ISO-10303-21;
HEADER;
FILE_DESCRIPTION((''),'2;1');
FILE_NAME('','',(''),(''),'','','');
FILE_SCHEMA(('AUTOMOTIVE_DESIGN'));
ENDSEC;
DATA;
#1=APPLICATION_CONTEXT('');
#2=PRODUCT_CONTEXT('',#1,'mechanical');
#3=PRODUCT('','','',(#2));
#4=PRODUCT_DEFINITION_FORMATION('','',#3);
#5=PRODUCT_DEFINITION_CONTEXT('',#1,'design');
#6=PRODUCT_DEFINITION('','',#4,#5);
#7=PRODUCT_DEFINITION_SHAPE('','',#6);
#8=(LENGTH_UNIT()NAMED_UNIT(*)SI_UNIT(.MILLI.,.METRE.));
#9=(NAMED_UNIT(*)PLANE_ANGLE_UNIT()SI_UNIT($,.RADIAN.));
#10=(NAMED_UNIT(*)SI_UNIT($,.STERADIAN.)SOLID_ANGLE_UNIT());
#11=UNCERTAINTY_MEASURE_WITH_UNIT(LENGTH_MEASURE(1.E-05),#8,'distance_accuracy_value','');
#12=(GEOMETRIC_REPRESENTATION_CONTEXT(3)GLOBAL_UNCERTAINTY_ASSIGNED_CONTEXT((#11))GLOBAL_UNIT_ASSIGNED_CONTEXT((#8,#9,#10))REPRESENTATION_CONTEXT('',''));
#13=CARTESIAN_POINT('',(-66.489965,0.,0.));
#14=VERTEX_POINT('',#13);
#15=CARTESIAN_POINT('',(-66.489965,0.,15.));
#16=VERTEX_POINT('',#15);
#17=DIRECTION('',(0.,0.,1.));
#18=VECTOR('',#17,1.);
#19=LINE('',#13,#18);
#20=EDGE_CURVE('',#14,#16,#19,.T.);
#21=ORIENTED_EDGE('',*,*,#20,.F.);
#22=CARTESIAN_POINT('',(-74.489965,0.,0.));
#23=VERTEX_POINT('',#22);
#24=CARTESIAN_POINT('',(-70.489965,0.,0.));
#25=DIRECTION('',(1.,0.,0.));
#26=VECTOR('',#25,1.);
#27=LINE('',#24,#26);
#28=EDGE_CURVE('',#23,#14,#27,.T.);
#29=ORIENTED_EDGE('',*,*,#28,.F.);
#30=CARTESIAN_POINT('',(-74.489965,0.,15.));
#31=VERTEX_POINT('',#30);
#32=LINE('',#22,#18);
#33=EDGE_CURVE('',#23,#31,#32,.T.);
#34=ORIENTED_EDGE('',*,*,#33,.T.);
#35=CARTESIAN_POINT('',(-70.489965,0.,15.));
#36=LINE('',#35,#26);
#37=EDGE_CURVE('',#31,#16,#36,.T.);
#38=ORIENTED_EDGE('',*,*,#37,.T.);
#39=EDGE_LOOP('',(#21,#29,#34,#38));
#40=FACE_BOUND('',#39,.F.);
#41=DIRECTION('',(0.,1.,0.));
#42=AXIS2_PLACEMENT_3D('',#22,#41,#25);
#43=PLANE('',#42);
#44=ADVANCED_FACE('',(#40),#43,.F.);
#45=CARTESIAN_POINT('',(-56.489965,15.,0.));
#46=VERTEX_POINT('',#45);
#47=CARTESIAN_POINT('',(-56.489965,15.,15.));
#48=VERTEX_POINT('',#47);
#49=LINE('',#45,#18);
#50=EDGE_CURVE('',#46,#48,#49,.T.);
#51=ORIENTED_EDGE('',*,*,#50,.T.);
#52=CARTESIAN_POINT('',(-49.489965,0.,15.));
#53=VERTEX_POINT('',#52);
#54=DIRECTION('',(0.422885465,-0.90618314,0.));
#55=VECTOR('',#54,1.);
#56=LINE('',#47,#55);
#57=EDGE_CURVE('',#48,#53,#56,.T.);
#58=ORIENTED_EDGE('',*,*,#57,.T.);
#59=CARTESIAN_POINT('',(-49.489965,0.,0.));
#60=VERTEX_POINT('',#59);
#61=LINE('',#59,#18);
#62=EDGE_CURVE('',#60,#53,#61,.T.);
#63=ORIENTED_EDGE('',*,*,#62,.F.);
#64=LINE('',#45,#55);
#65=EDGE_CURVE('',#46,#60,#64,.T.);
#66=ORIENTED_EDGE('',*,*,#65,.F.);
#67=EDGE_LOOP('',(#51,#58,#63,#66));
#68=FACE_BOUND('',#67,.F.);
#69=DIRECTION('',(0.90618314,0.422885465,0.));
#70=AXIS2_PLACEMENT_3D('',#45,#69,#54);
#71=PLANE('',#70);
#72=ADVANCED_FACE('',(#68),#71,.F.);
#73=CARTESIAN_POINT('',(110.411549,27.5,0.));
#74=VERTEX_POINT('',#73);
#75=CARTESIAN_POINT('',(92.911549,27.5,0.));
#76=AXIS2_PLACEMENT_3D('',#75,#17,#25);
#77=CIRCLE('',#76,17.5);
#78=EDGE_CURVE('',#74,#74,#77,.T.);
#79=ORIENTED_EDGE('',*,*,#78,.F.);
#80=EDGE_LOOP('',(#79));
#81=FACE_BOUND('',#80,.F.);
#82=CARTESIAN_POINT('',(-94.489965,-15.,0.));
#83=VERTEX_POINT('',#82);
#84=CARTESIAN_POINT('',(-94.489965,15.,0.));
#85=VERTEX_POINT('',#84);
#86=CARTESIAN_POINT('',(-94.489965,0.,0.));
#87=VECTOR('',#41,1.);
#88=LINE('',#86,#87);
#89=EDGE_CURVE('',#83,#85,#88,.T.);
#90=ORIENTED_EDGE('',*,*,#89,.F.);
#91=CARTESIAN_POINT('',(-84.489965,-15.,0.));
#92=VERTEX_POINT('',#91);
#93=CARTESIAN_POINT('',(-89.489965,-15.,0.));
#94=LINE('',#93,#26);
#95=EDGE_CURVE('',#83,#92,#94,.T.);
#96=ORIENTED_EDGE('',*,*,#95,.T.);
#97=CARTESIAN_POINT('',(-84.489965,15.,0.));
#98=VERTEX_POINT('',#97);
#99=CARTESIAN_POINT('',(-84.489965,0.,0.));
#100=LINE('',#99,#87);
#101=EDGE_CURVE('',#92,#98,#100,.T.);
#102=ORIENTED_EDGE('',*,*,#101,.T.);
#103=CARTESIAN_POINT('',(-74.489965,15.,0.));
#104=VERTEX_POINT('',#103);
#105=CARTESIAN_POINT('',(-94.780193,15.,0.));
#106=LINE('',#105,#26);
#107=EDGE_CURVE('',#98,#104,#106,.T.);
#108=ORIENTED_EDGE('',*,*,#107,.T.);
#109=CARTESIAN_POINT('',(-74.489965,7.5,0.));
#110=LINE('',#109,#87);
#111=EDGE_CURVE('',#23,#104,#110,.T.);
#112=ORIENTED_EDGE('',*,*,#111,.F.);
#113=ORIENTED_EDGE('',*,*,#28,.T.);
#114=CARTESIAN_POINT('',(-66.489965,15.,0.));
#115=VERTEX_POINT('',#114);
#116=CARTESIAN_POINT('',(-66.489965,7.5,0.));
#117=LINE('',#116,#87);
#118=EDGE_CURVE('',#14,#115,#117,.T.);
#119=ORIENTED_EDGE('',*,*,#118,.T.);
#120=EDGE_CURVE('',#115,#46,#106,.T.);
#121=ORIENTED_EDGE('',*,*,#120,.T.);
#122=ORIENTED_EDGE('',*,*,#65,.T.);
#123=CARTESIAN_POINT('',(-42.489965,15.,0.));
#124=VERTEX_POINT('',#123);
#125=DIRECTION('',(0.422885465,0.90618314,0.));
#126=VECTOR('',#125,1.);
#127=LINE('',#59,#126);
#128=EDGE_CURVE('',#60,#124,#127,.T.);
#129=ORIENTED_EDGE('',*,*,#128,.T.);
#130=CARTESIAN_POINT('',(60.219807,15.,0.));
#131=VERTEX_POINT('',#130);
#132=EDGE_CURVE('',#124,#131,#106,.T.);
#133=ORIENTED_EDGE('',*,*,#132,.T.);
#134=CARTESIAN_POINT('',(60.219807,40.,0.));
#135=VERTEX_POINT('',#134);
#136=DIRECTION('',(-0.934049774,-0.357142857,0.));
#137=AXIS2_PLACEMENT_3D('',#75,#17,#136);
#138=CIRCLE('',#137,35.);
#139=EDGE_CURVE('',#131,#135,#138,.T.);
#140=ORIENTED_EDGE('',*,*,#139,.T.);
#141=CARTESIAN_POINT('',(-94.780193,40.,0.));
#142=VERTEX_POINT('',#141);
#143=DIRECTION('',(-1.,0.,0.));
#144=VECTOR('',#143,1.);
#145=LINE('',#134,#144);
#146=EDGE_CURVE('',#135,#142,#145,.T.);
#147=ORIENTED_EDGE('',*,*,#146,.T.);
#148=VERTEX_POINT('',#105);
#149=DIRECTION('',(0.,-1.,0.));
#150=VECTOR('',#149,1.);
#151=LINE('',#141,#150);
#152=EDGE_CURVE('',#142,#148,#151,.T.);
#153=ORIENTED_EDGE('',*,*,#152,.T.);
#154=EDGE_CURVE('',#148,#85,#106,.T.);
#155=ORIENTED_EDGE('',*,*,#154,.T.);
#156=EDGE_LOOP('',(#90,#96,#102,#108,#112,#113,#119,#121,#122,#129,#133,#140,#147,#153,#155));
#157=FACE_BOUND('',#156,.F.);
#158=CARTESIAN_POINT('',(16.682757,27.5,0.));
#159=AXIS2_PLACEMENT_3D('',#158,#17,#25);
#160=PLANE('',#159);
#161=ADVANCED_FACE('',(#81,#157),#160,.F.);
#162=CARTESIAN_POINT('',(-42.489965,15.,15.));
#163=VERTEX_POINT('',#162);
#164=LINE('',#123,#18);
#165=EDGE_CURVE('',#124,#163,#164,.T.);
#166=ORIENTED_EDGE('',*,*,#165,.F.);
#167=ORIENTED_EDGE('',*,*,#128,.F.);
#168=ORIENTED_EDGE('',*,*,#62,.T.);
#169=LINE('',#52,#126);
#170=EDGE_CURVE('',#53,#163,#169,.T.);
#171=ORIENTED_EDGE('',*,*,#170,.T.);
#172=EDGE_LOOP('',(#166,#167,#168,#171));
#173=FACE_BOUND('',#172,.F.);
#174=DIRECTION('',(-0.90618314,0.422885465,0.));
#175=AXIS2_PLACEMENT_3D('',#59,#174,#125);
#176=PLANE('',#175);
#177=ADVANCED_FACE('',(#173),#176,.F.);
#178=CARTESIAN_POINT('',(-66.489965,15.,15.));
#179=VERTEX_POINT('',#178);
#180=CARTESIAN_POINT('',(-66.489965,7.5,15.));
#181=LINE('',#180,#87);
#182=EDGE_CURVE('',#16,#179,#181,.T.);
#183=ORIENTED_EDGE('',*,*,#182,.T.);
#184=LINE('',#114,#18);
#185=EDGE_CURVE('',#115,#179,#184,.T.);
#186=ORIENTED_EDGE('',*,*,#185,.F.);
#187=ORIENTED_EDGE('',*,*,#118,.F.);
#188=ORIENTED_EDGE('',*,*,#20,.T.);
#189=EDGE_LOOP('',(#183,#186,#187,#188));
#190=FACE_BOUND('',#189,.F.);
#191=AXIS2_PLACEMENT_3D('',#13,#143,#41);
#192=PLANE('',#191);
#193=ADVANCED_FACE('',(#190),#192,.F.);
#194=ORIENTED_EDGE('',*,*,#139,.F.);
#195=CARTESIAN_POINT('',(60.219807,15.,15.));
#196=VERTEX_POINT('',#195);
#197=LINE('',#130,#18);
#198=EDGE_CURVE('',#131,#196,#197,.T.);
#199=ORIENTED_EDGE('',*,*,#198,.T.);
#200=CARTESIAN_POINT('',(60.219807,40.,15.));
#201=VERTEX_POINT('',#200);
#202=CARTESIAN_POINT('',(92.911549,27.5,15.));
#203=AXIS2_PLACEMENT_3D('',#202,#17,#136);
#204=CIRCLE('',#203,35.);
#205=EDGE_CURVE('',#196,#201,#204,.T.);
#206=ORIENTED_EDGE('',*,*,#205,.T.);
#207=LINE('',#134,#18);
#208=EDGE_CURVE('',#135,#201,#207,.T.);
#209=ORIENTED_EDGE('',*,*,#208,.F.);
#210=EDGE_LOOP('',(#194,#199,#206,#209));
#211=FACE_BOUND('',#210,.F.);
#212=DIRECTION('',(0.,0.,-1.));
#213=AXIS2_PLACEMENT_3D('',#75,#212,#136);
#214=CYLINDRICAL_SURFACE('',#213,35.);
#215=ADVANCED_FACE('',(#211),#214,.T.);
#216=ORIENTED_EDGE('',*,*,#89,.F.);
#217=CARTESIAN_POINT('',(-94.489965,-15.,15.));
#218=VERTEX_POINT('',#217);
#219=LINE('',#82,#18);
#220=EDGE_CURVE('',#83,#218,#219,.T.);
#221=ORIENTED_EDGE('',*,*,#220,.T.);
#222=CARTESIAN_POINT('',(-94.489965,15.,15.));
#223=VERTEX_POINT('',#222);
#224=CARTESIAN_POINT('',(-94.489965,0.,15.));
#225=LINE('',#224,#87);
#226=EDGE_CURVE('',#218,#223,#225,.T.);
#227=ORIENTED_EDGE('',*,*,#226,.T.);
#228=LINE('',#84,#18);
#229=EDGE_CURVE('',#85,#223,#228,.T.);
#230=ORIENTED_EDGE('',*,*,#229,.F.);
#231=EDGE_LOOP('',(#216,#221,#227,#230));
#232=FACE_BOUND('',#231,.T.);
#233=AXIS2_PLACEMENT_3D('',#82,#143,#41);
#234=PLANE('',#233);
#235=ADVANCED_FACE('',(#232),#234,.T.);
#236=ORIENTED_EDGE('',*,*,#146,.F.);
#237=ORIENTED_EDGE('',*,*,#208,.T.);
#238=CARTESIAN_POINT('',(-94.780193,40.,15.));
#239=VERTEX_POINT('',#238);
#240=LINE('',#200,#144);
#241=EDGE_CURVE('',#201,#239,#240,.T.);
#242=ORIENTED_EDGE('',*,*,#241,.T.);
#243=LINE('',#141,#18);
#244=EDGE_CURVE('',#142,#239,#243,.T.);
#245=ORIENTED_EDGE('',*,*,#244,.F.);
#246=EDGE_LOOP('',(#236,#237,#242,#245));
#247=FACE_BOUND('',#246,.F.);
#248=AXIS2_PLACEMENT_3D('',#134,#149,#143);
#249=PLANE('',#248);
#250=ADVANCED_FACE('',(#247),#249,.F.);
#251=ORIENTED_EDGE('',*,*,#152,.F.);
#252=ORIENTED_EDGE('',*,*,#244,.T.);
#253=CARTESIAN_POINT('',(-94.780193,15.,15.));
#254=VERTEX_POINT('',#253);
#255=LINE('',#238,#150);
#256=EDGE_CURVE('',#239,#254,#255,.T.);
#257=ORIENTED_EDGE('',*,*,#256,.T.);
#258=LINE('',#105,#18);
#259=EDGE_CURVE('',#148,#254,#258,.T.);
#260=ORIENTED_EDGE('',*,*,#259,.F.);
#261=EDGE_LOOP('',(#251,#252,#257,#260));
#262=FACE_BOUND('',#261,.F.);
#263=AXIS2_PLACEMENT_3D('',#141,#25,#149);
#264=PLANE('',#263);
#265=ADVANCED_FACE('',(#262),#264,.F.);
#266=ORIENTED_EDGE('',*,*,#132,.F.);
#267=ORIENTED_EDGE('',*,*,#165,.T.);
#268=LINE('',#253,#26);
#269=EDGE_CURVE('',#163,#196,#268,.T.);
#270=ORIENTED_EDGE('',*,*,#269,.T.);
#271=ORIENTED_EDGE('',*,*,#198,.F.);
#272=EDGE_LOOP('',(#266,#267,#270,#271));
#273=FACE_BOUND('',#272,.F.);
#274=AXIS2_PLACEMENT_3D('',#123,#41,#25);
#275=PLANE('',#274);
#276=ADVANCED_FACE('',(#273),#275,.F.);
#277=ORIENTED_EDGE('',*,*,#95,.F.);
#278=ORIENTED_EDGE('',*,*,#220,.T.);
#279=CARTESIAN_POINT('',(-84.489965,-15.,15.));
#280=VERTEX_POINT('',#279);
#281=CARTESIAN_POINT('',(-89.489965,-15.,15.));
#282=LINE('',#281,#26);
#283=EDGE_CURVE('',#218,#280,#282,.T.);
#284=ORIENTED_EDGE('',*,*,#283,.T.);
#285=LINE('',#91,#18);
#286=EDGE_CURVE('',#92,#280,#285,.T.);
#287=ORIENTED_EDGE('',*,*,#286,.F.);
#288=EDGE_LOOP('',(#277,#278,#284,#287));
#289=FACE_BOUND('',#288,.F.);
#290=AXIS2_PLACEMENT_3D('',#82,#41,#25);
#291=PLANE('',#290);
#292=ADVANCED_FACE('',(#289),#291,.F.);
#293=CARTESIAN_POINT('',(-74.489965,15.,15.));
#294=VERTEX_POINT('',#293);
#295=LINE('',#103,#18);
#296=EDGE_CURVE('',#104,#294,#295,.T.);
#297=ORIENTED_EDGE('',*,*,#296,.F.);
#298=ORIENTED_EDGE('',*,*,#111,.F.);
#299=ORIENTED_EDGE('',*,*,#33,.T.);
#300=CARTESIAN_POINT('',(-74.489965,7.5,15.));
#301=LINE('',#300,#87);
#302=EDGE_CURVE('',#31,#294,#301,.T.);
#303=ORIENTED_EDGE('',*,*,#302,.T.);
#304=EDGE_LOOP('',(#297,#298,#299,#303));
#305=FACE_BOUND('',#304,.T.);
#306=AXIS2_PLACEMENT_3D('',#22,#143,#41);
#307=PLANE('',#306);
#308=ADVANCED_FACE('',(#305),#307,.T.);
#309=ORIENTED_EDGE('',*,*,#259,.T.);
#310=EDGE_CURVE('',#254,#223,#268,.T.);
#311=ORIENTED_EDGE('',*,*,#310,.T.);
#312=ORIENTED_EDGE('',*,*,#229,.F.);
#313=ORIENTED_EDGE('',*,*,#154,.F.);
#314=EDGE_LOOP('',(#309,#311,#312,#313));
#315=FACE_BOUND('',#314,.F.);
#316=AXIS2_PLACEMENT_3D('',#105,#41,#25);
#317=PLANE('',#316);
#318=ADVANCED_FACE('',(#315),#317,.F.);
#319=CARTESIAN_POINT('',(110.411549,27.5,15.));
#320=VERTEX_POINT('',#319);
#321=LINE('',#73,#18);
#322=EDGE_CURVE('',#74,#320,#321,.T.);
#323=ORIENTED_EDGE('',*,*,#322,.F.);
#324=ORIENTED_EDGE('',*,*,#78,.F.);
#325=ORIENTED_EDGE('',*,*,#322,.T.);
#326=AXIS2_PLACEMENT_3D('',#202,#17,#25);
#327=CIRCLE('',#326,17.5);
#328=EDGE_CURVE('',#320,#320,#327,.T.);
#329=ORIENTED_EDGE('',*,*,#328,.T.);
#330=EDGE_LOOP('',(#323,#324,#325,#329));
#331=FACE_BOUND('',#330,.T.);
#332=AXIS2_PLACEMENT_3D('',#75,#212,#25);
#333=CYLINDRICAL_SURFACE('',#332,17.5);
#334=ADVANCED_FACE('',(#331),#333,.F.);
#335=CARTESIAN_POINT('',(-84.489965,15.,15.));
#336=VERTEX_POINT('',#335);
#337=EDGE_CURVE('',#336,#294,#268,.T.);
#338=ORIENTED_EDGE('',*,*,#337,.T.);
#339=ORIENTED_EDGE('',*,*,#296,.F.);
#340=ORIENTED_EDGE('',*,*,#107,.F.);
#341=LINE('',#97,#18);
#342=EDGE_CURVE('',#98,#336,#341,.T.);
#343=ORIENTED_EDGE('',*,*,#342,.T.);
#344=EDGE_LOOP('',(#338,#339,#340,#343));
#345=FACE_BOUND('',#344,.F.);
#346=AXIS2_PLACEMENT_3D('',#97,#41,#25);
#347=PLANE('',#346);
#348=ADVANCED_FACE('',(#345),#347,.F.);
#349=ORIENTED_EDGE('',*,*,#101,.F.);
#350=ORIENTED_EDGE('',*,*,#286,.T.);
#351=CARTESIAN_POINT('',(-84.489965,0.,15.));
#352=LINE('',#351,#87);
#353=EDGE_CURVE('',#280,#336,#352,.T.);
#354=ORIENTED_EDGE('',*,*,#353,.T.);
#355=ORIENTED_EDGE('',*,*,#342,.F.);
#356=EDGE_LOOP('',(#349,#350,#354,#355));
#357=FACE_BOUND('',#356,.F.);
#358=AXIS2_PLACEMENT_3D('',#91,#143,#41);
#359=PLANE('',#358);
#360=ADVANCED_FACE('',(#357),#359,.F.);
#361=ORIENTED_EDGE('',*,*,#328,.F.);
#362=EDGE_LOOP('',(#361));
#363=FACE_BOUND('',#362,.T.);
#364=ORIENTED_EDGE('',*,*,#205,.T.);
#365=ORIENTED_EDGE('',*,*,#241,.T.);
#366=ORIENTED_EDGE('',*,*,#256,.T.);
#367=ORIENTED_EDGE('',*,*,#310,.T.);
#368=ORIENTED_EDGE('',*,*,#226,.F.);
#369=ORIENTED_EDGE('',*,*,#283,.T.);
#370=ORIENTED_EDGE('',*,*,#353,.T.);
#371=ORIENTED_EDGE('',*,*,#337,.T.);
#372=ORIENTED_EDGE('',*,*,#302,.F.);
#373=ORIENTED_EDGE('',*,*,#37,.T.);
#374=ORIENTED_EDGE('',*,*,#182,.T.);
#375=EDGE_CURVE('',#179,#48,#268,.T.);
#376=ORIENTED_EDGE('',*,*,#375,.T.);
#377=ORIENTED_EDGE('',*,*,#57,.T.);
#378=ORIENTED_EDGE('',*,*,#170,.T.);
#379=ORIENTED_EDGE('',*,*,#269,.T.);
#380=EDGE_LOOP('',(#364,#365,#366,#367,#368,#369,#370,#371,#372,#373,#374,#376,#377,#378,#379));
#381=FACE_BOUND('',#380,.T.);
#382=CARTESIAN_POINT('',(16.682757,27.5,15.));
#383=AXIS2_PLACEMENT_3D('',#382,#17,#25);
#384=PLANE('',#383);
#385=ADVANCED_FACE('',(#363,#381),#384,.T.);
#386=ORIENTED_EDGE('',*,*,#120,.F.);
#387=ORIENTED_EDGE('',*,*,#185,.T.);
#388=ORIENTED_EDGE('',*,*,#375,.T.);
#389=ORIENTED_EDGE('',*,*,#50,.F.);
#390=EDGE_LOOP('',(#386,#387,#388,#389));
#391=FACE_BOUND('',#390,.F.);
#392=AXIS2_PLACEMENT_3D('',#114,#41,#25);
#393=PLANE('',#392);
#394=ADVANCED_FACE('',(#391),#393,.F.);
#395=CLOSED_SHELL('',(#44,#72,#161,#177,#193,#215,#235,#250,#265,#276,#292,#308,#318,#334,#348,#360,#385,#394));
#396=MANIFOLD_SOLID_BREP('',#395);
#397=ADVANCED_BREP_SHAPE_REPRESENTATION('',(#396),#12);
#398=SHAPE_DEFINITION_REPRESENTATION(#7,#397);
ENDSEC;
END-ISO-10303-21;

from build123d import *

# Parameters (mm, degrees)
F0_R     = 17.5
F0_W     = 10
F0_H     = 30
F0_W_2   = 8
F0_H_2   = 15
F1_DEPTH = 15


# Not quite as in the source:
# - a feature of the source that left no trace in its solid (it failed there, or was rolled back) is left out


with BuildPart() as f1:
    # F0 (on Top) → F1 (new body)
    with BuildSketch(Plane.XY):
        with BuildLine():
            Line((60.2198065221, 40), (-94.7801934779, 40))
            Line((-94.7801934779, 40), (-94.7801934779, 15))
            Line((-94.7801934779, 15), (-94.4899649718, 15))
            Line((-94.4899649718, 15), (-84.4899649718, 15))
            Line((-84.4899649718, 15), (-74.4899649718, 15))
            Line((-74.4899649718, 15), (-66.4899649718, 15))
            Line((-66.4899649718, 15), (-56.4899649718, 15))
            Line((-56.4899649718, 15), (-42.4899649718, 15))
            Line((-42.4899649718, 15), (60.2198065221, 15))
            ThreePointArc((60.2198065221, 15), (127.9115485987, 27.5), (60.2198065221, 40))
        make_face()
        with Locations((92.9115485987, 27.5)):
            Circle(F0_R, mode=Mode.SUBTRACT)
        with Locations((-89.4899649718, 0)):
            Rectangle(F0_W, F0_H)
        with Locations((-70.4899649718, 7.5)):
            Rectangle(F0_W_2, F0_H_2)
        Polygon((-49.4899649718, 0), (-42.4899649718, 15), (-56.4899649718, 15), align=None)
    extrude(amount=F1_DEPTH)


solid = f1.part
